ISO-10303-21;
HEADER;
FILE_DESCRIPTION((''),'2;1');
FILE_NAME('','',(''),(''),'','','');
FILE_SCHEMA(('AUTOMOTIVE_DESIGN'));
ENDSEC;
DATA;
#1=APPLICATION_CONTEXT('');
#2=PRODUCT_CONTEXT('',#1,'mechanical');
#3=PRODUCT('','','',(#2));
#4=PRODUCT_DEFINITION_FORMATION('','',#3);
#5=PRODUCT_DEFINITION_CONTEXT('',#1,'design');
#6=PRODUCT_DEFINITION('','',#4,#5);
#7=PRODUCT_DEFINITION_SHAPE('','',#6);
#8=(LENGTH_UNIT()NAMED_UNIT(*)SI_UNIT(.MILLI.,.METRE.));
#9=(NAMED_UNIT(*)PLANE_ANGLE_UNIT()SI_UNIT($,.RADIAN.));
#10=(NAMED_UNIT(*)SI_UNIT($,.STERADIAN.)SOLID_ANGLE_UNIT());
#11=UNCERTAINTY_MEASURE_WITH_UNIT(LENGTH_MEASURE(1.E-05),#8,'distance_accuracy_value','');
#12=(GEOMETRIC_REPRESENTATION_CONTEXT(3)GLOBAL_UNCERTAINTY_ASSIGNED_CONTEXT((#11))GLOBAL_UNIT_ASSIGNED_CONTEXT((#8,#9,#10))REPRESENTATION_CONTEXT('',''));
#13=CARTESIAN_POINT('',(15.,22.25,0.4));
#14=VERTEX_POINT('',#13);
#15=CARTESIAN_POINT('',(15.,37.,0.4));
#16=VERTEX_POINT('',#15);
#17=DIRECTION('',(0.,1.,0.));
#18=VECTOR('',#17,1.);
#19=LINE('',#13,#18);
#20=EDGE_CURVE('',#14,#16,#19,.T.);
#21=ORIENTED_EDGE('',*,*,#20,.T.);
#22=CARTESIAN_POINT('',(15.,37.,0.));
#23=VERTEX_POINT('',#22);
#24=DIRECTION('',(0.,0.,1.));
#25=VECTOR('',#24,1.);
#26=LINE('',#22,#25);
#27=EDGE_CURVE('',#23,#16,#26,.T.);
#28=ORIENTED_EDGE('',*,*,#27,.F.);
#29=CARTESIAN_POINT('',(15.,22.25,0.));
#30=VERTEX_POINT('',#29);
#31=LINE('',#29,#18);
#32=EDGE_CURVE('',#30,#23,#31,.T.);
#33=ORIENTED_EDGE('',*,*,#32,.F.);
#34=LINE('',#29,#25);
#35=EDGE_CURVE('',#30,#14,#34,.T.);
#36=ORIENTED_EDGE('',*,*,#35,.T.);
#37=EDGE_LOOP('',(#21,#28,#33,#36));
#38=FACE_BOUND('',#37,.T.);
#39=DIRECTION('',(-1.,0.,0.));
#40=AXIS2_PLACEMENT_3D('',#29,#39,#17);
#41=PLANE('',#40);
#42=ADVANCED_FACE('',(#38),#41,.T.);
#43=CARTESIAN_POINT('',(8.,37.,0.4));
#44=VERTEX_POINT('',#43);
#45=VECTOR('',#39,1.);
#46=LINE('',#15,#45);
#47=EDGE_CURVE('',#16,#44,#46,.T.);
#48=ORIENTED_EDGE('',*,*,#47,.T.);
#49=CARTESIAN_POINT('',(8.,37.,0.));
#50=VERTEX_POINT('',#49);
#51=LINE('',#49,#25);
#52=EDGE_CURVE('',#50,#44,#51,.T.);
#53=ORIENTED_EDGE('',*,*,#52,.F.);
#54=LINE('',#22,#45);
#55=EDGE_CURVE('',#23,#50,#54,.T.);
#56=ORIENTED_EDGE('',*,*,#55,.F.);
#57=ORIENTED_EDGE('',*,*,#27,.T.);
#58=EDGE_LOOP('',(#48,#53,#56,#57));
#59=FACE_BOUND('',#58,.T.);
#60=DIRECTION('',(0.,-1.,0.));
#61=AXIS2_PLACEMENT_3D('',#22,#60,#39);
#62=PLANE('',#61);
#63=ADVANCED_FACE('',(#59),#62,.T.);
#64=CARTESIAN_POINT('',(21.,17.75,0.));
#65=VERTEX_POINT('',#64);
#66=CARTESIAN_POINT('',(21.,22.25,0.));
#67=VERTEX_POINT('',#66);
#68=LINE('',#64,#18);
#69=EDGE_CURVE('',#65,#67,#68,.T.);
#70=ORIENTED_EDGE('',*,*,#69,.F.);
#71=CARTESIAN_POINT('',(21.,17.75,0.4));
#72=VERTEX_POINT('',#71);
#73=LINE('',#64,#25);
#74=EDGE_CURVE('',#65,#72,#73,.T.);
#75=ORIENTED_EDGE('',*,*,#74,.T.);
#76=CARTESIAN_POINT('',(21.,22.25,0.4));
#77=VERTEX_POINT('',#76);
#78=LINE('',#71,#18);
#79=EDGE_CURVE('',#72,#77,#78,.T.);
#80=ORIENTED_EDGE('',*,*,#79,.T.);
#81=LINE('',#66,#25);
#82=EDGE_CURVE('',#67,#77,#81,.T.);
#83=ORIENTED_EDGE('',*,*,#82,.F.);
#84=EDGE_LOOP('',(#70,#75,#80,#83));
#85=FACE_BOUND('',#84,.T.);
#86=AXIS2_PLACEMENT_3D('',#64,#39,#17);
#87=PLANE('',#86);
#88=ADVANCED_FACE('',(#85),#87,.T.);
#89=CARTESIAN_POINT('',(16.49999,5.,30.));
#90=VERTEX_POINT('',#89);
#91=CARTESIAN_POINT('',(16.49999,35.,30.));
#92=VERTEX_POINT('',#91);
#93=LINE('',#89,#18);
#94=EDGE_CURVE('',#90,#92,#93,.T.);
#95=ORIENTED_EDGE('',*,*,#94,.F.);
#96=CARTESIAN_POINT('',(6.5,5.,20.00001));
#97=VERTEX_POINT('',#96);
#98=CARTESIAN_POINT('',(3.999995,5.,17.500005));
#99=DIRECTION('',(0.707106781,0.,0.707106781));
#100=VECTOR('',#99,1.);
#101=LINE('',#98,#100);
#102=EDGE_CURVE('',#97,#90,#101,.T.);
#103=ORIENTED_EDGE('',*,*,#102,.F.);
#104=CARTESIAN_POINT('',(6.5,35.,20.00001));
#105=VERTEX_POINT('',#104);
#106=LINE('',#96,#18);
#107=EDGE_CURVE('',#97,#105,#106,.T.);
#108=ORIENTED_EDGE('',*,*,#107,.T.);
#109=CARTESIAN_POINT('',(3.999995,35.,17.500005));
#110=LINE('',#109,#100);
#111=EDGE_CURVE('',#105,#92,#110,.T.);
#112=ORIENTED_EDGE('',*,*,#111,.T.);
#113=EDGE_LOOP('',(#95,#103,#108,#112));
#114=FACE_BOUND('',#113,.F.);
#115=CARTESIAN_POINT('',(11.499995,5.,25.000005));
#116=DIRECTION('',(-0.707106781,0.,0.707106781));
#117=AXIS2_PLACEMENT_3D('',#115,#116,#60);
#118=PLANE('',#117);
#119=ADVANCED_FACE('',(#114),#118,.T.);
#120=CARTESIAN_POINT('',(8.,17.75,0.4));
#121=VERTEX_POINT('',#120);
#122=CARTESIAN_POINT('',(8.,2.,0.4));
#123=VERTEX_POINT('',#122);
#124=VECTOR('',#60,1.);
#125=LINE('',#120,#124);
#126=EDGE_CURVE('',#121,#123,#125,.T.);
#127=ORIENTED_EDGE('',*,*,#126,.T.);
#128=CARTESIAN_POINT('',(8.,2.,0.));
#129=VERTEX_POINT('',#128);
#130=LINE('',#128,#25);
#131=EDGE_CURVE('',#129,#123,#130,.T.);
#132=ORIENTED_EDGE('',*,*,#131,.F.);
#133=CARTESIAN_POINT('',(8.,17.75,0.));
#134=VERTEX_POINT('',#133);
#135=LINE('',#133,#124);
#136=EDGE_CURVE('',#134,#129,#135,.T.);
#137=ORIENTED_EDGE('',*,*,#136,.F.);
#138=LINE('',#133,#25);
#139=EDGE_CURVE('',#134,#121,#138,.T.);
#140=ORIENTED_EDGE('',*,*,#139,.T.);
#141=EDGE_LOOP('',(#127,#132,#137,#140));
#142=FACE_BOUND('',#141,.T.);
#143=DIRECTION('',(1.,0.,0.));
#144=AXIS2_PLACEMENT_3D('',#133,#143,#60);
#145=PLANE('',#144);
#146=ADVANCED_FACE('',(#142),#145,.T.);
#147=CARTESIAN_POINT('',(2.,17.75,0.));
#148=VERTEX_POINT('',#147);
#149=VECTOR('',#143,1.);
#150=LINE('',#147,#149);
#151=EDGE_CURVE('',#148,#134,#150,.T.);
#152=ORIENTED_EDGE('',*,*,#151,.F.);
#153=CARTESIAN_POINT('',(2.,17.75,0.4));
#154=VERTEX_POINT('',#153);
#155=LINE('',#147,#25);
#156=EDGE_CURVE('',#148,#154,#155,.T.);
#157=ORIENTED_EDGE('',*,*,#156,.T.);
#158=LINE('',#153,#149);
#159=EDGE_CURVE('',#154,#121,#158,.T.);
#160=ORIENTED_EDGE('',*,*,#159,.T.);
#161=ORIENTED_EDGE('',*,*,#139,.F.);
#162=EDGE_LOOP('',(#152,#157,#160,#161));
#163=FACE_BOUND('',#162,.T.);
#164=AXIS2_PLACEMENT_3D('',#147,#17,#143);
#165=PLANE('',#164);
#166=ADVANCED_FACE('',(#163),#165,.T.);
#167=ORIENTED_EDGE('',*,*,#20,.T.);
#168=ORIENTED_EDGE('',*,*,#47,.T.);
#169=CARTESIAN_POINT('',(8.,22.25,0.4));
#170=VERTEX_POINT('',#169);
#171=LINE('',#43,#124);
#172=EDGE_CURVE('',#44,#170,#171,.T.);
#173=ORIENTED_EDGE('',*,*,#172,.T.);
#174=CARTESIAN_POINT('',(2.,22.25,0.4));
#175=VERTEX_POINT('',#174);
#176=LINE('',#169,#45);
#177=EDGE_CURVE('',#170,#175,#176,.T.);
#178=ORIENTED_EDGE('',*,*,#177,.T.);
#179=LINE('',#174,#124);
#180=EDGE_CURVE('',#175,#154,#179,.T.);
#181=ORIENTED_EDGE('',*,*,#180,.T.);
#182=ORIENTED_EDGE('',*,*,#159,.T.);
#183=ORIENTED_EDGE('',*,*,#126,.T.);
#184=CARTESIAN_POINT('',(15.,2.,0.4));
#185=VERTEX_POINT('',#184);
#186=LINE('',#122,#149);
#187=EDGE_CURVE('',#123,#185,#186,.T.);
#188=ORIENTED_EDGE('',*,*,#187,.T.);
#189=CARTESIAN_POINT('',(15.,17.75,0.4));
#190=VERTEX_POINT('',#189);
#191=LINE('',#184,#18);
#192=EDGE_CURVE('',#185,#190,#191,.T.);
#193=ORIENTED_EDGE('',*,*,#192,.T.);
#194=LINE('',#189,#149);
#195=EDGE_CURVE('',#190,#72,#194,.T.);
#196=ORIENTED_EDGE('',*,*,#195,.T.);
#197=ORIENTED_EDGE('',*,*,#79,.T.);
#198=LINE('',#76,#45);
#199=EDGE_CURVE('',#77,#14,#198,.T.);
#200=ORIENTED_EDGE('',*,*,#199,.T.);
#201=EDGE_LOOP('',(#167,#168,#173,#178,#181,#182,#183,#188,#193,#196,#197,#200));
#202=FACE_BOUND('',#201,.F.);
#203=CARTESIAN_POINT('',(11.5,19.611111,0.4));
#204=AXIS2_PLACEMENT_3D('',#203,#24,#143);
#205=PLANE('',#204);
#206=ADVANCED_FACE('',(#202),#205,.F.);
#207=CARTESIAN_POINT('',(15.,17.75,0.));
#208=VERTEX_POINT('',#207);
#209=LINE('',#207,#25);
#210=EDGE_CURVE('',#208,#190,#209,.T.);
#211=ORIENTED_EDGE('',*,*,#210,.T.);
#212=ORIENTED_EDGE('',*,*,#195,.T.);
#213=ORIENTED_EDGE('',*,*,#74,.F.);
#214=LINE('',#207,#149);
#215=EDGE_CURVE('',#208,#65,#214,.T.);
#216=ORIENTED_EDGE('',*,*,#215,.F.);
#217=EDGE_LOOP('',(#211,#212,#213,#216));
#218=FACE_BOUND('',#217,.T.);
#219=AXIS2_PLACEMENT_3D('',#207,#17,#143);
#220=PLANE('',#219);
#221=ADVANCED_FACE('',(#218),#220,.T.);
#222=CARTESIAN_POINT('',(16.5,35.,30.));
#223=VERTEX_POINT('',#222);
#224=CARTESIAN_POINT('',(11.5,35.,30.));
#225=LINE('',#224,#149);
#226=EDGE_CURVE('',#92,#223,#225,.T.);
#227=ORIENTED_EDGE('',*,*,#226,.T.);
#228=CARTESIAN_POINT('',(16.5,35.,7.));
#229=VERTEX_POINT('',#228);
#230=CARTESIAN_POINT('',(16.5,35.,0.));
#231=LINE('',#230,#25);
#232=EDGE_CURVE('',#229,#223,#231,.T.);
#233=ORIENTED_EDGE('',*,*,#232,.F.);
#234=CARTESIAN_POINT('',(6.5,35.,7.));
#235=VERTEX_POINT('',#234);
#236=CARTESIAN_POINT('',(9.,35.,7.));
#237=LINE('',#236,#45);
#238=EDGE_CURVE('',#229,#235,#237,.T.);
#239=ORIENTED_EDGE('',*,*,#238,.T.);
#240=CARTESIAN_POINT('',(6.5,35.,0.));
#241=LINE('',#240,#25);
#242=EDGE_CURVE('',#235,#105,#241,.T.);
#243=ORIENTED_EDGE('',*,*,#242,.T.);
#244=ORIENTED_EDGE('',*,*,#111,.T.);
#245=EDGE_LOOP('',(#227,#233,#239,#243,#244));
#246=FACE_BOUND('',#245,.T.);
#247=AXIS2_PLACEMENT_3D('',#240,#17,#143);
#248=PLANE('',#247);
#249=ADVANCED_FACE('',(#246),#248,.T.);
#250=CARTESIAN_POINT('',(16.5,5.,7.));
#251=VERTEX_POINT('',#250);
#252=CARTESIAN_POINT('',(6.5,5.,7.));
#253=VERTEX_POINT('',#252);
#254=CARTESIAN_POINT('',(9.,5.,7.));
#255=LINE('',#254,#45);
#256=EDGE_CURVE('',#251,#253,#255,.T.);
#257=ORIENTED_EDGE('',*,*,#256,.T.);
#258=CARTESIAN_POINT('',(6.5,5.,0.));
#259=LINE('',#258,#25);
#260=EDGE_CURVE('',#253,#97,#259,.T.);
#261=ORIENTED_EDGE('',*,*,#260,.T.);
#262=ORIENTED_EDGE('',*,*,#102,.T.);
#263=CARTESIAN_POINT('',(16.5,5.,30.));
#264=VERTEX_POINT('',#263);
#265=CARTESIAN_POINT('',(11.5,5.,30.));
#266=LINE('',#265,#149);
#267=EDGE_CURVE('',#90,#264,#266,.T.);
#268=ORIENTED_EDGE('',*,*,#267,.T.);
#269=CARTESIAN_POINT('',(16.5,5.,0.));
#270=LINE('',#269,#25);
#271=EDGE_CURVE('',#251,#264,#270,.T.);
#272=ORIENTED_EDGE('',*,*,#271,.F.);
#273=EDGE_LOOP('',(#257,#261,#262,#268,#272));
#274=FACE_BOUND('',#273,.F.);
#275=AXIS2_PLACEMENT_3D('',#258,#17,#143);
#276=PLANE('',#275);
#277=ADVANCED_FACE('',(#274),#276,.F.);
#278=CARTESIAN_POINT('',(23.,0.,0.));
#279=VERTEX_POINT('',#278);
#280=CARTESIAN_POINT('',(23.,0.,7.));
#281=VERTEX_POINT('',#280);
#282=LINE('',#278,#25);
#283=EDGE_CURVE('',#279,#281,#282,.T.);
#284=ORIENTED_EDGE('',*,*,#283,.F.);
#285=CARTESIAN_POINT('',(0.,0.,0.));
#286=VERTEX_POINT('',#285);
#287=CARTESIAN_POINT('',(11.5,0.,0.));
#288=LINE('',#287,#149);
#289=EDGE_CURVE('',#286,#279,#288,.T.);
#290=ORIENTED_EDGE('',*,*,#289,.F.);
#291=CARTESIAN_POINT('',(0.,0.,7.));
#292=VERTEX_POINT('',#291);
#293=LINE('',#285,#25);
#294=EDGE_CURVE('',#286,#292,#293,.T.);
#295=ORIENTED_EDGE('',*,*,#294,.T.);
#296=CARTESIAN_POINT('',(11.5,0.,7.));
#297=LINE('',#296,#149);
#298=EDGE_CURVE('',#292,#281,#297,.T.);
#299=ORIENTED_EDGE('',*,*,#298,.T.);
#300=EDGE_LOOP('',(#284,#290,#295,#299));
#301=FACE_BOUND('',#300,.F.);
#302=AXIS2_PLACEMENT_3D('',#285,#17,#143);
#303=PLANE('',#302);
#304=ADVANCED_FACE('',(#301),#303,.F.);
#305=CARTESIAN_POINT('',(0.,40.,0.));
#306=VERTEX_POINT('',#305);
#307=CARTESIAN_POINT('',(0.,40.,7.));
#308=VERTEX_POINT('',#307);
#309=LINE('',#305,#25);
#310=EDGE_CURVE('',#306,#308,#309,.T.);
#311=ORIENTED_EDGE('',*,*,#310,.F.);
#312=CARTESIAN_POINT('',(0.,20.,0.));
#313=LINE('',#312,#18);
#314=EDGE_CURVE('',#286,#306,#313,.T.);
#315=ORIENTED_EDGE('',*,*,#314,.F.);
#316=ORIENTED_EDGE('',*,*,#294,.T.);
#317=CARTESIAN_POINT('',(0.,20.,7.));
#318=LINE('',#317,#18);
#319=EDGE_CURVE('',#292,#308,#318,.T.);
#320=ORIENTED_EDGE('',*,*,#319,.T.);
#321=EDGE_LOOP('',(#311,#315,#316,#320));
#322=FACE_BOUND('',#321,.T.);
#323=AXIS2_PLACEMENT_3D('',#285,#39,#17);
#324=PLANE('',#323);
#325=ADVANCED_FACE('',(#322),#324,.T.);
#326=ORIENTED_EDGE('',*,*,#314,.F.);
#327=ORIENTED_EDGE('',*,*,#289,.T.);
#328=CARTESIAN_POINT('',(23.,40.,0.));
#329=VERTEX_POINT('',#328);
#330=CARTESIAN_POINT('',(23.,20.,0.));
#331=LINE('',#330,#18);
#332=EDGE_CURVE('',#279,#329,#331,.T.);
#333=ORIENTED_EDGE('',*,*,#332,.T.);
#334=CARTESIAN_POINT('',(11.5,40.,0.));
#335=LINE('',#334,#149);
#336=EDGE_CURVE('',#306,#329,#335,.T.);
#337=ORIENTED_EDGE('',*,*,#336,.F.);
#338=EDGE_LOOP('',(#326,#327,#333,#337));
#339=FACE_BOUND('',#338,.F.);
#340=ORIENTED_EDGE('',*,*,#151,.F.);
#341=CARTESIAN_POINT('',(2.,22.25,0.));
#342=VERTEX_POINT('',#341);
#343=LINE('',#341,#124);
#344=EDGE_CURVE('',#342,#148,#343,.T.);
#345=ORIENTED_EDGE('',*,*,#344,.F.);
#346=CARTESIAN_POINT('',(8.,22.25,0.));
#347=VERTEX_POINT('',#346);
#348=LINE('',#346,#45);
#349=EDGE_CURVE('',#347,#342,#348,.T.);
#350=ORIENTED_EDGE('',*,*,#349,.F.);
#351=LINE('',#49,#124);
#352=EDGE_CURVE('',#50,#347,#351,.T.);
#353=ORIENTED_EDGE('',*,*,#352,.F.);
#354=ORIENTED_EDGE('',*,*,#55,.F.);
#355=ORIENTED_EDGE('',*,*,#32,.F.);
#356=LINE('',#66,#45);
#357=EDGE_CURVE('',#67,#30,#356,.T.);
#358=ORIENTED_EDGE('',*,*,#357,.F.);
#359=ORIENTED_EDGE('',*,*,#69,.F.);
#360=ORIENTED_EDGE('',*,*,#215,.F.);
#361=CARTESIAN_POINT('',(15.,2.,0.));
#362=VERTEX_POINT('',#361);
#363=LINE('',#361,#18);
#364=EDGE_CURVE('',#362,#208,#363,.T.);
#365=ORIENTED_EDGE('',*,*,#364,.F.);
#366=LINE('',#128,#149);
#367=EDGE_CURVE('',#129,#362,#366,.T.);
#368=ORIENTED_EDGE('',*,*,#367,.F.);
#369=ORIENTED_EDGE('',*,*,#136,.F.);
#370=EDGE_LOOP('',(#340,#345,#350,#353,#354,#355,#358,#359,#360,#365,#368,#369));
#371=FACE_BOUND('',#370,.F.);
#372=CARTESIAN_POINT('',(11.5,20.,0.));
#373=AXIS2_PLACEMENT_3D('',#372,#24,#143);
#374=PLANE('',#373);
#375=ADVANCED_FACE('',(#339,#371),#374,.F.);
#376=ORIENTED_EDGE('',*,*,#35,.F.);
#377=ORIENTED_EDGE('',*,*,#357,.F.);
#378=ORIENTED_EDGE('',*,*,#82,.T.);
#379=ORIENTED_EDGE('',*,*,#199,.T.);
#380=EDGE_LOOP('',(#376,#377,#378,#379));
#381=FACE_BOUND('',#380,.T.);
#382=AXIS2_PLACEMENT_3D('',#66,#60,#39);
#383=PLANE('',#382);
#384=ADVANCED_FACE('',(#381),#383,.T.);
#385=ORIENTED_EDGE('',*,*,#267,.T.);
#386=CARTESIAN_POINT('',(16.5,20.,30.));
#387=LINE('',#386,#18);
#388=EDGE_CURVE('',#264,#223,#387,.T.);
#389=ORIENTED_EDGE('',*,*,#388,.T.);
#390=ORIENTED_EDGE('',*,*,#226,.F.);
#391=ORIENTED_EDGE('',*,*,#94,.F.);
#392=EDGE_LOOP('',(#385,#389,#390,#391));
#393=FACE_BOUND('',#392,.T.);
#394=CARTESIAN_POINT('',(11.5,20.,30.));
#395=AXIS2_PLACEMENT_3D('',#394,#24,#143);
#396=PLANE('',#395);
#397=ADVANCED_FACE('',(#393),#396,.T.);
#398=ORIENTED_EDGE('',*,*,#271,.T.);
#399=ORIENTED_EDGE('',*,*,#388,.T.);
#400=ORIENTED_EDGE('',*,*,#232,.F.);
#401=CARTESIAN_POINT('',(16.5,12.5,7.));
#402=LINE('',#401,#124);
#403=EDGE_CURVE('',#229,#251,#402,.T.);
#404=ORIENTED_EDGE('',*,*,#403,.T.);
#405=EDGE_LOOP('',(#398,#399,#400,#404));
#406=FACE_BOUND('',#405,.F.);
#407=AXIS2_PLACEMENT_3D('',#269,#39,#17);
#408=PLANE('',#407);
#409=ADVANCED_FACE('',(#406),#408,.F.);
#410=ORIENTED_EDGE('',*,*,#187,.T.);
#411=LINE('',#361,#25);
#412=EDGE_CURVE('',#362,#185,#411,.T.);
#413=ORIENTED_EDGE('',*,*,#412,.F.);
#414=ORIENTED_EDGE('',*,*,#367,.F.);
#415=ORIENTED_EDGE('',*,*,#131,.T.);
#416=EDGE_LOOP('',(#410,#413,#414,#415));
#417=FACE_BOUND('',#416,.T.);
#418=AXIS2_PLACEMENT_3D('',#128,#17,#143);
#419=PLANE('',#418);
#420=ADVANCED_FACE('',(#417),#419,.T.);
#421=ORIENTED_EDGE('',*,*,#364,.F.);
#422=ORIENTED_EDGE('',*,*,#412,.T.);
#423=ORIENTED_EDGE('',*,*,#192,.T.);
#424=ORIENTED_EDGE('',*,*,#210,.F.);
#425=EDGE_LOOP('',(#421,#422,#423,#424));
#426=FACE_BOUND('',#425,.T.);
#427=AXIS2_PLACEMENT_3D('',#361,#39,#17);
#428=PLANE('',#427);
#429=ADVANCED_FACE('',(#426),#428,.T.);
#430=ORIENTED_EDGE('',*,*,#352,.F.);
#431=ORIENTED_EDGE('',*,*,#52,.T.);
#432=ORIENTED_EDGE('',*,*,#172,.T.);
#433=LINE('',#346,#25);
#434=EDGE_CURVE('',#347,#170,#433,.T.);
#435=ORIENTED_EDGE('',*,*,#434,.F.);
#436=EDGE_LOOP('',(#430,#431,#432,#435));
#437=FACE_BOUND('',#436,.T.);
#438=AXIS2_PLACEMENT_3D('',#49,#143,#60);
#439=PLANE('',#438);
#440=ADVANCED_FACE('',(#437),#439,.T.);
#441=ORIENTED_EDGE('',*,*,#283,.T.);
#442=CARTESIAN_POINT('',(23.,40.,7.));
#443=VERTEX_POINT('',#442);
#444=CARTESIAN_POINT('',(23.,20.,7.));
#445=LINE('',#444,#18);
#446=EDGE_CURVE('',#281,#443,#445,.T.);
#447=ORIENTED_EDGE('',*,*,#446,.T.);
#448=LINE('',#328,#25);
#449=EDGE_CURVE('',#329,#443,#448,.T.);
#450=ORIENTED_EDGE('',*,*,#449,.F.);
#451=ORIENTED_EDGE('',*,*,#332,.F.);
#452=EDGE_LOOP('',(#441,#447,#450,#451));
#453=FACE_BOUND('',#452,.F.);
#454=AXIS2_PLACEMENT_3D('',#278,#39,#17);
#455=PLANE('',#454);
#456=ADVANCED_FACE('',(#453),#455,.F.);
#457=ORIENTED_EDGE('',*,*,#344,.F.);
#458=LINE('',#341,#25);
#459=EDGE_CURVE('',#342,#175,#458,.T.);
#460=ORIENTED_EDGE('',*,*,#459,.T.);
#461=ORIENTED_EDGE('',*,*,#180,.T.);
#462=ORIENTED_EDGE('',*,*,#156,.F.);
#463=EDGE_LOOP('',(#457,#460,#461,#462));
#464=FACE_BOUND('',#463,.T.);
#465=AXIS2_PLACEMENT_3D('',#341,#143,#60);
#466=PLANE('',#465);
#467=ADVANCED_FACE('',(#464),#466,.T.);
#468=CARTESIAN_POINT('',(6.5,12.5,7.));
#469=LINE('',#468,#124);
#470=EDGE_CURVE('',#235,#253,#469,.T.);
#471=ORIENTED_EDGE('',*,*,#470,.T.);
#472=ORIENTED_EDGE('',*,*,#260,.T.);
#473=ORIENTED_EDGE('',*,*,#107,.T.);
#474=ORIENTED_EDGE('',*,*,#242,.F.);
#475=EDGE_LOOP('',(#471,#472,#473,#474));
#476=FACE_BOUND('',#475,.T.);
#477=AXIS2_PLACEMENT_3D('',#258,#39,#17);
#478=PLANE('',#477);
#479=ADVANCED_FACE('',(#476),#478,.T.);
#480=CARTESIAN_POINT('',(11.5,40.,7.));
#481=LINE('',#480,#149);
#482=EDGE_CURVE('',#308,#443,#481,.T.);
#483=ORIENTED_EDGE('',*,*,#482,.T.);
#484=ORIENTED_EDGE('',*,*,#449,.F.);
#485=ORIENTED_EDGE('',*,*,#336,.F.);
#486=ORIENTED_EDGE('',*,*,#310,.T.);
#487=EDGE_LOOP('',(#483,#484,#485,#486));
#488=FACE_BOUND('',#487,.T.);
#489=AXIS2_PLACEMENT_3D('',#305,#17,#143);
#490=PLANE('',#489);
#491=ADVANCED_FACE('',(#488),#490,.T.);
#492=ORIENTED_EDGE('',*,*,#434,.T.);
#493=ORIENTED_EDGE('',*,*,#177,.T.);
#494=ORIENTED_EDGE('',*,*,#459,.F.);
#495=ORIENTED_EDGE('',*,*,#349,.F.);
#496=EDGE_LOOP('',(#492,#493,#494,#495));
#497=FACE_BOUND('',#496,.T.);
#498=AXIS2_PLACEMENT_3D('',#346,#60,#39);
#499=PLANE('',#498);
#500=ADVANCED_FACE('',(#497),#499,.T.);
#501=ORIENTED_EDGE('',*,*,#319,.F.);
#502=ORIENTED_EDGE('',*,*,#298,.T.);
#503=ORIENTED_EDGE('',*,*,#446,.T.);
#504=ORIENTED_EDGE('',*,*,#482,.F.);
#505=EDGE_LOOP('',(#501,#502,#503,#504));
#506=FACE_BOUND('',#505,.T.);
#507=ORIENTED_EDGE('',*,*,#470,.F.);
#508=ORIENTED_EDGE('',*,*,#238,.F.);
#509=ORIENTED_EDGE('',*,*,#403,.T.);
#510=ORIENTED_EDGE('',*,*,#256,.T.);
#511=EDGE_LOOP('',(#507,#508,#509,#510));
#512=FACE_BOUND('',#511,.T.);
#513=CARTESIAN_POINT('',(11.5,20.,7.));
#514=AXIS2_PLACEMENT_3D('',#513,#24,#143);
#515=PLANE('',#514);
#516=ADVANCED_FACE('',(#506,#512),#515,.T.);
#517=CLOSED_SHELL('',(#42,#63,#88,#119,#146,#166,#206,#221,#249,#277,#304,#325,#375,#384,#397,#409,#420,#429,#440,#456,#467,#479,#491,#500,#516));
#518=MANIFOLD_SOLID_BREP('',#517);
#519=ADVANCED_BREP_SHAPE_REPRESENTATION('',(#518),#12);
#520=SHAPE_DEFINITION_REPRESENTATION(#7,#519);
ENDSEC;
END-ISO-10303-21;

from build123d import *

# Parameters (mm, degrees)
F0_W     = 23
F0_H     = 40
F1_DEPTH = 7
F2_W     = 10
F2_H     = 30
F3_DEPTH = 30
F5_DEPTH = 0.4
F6_SIZE  = 9.99999


# Not quite as in the source:
# - a fillet or chamfer is up to 0.001 mm smaller than in the source, because OpenCascade refuses the exact size


with BuildPart() as f1:
    # F0 (on Top) → F1 (new body)
    with BuildSketch(Plane.XY):
        with Locations((11.5, 20)):
            Rectangle(F0_W, F0_H)
    extrude(amount=F1_DEPTH)

    # F2 (on Top) → F3 (join)
    with BuildSketch(Plane.XY):
        with Locations((11.5, 20)):
            Rectangle(F2_W, F2_H)
    extrude(amount=F3_DEPTH)

    # F4 (on Top) → F5 (cut)
    with BuildSketch(Plane.XY):
        Polygon((8, 17.75), (8, 2), (15, 2), (15, 17.75), (21, 17.75), (21, 22.25), (15, 22.25), (15, 37), (8, 37), (8, 22.25), (2, 22.25), (2, 17.75), align=None)
    extrude(amount=F5_DEPTH, mode=Mode.SUBTRACT)

    # F6 (size 10 in the source; OpenCascade refuses exactly that, so slightly less here)
    f6_edges = [f1.edges().sort_by_distance(p)[0] for p in [
        (6.5, 20, 30),
    ]]
    chamfer(f6_edges, length=F6_SIZE)


solid = f1.part
